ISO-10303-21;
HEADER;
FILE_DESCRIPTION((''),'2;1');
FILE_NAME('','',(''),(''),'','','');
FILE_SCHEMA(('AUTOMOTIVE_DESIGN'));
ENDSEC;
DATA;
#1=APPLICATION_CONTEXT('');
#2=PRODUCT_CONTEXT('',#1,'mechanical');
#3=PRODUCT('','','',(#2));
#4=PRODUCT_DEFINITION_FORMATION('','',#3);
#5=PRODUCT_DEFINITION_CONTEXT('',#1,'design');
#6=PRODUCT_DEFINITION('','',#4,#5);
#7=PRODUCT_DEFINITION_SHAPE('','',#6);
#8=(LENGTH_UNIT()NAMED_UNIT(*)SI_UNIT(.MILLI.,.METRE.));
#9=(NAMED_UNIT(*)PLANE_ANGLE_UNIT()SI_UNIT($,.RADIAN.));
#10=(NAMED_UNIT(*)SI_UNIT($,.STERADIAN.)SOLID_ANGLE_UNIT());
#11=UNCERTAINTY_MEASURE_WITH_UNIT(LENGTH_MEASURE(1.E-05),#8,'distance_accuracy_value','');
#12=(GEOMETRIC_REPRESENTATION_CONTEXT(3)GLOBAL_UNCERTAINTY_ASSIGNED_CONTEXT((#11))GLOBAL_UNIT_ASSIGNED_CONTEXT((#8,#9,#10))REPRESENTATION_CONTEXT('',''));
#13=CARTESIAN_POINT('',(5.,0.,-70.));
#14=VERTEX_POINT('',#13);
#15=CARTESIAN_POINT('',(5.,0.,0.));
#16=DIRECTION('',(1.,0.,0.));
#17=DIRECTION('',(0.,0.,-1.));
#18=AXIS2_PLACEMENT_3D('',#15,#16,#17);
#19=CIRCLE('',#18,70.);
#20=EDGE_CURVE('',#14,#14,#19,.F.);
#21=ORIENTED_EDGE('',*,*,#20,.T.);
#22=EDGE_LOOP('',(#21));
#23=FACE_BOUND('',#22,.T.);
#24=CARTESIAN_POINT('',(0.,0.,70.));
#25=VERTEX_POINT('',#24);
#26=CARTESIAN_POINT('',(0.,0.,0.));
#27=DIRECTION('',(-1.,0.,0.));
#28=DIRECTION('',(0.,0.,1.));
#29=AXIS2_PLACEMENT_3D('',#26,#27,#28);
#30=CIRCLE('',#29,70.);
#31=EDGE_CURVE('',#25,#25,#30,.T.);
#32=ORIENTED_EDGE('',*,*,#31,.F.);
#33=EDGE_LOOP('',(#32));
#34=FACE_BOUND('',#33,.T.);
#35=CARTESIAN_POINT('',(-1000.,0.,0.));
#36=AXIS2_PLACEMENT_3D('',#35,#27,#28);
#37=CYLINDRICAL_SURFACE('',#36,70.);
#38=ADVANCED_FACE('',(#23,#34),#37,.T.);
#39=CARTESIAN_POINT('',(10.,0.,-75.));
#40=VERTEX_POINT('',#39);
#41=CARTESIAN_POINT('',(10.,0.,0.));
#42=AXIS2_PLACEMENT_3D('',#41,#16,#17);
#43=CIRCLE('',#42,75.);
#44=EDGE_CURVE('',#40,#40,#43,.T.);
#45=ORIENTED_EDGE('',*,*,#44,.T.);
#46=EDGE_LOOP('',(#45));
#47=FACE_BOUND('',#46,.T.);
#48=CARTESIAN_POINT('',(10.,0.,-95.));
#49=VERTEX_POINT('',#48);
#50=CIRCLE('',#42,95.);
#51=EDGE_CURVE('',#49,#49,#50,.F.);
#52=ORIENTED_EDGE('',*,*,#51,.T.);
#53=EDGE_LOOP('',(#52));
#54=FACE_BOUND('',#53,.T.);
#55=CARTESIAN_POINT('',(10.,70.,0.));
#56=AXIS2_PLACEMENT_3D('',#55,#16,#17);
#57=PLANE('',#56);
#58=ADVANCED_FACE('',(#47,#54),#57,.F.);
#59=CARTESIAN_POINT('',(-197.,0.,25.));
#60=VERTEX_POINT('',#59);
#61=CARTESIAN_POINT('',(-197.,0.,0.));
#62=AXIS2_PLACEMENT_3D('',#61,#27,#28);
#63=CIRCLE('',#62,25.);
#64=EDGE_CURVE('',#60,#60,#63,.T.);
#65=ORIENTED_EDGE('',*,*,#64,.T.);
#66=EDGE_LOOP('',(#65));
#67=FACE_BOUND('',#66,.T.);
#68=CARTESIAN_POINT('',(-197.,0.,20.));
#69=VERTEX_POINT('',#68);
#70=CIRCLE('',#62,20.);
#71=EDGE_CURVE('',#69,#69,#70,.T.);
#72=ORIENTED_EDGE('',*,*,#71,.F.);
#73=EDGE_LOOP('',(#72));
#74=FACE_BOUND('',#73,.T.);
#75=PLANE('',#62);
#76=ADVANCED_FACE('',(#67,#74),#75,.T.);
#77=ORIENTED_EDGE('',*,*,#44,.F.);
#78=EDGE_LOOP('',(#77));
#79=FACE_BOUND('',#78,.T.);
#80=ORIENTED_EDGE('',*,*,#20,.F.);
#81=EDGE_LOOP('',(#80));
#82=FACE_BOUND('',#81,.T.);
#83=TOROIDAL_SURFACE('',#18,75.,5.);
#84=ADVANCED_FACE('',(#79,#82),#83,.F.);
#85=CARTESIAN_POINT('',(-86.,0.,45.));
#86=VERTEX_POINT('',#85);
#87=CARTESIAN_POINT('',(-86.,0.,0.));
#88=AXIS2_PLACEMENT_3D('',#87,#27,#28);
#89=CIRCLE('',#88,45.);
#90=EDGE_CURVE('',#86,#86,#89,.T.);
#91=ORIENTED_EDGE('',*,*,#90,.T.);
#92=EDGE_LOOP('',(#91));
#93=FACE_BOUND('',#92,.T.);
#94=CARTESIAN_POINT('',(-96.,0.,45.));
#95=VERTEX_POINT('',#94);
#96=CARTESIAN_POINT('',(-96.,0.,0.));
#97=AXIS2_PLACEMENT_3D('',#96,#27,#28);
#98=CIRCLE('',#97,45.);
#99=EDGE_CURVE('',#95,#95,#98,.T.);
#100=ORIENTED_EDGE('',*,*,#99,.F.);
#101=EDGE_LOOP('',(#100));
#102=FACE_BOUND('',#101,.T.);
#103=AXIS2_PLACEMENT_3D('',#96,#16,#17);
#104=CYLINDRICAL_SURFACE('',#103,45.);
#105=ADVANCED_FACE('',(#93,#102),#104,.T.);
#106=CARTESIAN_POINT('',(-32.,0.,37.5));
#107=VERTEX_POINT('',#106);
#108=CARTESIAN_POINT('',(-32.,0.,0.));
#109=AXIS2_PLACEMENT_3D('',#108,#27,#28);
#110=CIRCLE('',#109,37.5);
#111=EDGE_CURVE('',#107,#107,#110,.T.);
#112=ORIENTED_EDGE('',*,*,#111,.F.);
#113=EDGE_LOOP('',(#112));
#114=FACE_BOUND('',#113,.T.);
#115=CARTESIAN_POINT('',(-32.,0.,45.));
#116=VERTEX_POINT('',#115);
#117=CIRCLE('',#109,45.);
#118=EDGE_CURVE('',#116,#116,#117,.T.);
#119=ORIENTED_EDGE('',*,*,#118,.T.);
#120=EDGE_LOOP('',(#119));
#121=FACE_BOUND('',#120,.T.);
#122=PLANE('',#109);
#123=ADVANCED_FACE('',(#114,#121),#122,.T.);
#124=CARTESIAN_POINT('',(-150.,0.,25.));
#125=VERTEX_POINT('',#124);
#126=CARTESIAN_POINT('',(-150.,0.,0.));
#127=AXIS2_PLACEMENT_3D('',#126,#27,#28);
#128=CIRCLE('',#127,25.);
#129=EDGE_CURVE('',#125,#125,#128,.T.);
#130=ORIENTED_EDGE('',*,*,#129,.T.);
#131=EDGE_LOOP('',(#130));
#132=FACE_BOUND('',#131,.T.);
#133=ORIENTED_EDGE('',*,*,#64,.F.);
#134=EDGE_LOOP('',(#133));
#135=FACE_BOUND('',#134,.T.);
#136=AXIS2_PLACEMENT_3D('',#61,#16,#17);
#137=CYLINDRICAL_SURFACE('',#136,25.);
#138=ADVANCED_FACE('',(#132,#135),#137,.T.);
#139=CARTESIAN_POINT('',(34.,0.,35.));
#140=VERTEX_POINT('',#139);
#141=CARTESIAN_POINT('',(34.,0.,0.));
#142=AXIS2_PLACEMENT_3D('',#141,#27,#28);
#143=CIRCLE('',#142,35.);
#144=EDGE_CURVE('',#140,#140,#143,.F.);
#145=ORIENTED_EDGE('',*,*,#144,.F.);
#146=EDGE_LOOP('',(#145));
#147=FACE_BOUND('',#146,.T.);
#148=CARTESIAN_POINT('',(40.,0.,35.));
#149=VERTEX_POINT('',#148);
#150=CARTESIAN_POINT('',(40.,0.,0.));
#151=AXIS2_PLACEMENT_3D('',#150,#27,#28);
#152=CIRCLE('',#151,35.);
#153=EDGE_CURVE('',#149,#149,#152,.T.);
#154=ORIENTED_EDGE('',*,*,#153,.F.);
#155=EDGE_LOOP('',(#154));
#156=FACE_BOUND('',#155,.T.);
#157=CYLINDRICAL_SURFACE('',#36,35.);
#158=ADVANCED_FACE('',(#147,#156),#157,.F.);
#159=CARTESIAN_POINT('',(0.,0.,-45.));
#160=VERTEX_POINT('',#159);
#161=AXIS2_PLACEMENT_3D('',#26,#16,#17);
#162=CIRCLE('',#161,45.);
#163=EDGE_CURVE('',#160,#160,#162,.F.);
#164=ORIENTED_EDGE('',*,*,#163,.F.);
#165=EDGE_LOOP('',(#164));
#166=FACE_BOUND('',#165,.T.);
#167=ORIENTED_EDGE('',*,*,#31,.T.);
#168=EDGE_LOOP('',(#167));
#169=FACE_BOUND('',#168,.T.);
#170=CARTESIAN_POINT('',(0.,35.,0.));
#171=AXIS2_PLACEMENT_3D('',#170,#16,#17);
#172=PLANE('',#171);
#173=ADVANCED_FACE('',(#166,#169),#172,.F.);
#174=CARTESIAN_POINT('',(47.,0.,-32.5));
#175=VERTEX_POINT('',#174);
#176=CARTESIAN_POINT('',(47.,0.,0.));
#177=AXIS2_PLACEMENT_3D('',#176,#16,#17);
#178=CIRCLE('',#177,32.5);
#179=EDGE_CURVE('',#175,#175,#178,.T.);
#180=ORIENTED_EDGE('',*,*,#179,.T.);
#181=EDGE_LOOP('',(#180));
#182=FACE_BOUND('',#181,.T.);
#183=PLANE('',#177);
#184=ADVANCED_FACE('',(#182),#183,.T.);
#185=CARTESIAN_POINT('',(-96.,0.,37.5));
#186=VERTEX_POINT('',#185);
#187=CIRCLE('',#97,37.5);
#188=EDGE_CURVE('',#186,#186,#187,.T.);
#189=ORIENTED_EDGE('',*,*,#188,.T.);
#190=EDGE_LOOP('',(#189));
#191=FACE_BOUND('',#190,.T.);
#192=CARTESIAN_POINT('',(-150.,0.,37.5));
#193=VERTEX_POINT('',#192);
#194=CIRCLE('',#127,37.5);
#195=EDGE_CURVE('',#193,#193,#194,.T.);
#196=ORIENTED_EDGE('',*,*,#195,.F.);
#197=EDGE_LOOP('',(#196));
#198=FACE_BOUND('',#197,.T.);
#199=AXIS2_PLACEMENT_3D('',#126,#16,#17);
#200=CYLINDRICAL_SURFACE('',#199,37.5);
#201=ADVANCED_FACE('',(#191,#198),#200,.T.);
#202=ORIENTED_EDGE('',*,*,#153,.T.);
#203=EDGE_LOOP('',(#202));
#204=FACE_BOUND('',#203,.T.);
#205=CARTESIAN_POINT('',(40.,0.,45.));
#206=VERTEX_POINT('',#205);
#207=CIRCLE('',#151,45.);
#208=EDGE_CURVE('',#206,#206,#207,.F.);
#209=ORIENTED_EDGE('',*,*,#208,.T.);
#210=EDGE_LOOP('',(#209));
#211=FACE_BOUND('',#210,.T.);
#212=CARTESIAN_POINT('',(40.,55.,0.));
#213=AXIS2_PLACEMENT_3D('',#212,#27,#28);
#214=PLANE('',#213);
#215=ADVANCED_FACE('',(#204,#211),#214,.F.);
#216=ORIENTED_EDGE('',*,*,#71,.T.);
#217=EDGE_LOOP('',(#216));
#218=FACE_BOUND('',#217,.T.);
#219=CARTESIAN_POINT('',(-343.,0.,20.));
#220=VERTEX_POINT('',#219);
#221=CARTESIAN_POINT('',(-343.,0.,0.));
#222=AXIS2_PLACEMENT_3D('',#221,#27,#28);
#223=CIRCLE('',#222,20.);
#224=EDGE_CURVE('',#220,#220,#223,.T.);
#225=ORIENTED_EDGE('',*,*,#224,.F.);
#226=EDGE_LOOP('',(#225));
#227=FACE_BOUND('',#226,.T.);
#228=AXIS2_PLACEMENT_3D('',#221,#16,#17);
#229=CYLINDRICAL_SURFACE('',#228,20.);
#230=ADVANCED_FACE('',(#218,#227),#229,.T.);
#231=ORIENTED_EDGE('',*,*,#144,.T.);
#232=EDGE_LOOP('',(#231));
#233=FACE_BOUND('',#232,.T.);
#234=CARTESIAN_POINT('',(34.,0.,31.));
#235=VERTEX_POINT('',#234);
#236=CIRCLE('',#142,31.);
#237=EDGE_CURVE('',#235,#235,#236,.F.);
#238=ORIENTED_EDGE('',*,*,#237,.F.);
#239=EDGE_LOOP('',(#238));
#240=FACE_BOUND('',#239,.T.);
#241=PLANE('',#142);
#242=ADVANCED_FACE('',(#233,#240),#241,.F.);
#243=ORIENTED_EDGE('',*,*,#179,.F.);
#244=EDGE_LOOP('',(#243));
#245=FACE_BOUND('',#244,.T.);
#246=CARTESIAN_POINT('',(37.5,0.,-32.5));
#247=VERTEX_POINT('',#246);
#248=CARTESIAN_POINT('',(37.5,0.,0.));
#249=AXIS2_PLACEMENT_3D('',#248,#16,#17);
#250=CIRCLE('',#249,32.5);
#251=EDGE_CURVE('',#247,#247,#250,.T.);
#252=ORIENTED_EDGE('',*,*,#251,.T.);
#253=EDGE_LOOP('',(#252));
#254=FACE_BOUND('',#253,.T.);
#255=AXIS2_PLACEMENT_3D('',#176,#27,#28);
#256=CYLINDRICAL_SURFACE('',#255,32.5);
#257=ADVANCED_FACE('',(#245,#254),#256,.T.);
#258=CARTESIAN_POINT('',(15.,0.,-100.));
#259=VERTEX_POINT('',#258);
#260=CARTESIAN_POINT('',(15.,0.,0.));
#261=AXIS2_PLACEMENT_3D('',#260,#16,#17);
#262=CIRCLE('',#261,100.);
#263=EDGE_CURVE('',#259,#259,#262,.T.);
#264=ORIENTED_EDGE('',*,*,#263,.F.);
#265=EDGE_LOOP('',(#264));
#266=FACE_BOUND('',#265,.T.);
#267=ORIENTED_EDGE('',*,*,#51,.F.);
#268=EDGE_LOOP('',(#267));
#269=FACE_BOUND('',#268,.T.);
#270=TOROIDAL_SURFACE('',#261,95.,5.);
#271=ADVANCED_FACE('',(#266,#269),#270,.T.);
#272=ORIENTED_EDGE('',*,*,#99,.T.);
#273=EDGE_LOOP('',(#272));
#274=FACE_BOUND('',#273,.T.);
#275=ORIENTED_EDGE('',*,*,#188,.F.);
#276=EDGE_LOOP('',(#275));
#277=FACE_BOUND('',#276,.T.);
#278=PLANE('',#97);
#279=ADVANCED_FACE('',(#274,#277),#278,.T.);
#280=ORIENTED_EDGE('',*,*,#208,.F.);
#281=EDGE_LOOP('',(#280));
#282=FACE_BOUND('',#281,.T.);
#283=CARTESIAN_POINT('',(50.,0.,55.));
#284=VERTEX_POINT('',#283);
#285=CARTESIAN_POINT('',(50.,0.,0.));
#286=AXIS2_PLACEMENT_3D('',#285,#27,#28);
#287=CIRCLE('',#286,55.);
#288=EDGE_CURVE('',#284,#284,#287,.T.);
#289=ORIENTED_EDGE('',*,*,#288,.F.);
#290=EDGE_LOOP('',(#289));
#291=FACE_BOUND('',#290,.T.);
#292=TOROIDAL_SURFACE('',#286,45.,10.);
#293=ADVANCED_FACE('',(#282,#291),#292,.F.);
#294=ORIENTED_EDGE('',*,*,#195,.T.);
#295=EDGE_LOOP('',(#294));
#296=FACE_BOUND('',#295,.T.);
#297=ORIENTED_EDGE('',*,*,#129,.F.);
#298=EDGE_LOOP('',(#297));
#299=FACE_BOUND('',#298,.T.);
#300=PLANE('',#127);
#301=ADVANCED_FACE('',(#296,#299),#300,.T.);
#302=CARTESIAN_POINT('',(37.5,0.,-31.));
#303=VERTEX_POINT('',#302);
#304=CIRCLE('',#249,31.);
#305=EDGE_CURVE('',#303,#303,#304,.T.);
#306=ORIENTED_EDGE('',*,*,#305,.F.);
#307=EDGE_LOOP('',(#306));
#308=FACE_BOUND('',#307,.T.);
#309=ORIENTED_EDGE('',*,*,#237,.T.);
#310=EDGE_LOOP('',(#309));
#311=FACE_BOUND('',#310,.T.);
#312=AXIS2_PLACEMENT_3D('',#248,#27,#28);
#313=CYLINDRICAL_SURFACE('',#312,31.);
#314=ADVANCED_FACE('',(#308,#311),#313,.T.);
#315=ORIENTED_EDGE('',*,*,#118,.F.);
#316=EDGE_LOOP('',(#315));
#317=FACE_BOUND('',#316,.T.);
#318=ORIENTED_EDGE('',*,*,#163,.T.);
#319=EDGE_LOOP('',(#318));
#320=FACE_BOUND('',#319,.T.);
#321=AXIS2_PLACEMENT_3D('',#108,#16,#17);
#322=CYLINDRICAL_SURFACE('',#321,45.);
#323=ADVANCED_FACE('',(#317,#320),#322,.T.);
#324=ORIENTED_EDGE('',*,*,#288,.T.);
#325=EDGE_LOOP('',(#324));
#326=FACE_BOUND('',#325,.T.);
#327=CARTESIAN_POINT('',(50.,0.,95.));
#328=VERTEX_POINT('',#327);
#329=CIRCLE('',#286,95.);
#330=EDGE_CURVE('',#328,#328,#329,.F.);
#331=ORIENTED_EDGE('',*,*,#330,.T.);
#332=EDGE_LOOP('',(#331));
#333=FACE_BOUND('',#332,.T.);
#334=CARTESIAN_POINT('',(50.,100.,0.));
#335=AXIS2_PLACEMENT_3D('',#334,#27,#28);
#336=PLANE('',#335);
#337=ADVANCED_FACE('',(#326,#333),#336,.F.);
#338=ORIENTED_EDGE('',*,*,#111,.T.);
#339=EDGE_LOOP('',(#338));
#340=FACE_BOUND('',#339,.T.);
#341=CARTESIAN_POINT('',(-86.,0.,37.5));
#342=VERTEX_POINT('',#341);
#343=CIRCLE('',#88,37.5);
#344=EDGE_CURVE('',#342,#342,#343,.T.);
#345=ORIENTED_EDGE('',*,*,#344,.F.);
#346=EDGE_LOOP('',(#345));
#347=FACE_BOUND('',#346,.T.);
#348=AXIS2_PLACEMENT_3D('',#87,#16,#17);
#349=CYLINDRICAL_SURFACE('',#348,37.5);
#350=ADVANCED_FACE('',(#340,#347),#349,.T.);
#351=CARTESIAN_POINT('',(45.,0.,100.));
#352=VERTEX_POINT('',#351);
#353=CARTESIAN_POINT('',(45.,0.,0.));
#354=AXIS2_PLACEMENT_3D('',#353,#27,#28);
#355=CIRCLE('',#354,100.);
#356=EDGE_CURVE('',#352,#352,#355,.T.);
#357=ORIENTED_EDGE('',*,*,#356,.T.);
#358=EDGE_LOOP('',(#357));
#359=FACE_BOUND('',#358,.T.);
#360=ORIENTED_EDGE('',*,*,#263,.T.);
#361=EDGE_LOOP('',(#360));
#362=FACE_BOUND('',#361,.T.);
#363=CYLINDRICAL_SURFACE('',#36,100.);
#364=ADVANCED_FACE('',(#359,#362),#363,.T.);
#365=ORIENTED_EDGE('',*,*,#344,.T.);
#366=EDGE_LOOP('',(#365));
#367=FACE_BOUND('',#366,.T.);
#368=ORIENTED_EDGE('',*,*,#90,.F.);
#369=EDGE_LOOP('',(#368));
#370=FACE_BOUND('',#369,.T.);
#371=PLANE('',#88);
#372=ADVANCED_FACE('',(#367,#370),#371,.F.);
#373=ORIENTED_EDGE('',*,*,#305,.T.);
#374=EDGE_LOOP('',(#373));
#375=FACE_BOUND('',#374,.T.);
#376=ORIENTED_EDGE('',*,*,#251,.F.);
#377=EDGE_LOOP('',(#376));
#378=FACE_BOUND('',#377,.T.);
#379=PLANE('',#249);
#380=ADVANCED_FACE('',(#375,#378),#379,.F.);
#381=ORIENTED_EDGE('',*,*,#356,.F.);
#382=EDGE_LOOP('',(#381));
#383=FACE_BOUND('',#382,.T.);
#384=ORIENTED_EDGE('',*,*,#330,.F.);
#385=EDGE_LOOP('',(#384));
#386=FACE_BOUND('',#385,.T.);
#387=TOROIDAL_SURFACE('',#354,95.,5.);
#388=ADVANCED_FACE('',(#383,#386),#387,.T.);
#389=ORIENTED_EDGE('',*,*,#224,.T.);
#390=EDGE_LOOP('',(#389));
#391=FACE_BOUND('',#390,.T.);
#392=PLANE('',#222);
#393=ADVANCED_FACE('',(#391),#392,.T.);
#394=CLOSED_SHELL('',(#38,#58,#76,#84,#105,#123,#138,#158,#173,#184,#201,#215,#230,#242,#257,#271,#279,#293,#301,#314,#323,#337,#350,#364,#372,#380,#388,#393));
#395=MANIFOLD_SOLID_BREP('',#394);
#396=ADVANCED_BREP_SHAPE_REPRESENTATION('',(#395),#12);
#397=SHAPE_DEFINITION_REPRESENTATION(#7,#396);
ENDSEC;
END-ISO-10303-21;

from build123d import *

# Parameters (mm, degrees)
FILLET_1_R      = 5
FILLET_2_R      = 10
SKETCH_2_R      = 45
SKETCH_2_R_2    = 35
EXTRUDE_1_DEPTH = 32
SKETCH_3_R      = 35
EXTRUDE_2_DEPTH = 66
SKETCH_4_R      = 37.5
EXTRUDE_3_DEPTH = 54
SKETCH_5_R      = 45
EXTRUDE_4_DEPTH = 10
SKETCH_6_R      = 37.5
EXTRUDE_5_DEPTH = 54
SKETCH_7_R      = 25
EXTRUDE_6_DEPTH = 47
SKETCH_8_R      = 20
EXTRUDE_7_DEPTH = 146
SKETCH_9_R      = 31
EXTRUDE_8_DEPTH = 3.5
SKETCH_10_R     = 32.5
EXTRUDE_9_DEPTH = 9.5


with BuildPart() as part:
    # 草图1 → 旋转1 (revolve)
    with BuildSketch(Plane.XY, mode=Mode.PRIVATE) as revolve_1_sk:
        Polygon((10, 100), (50, 100), (50, 55), (40, 55), (40, 35), (0, 35), (0, 70), (10, 70), align=None)
    revolve(revolve_1_sk.sketch.rotate(Axis((-1000, 0, 0), (1, 0, 0)), 90), axis=Axis((-1000, 0, 0), (1, 0, 0)))

    # 圆角1
    fillet_1_edges = [part.edges().sort_by_distance(p)[0] for p in [
        (10, 0, -70),
        (50, 0, -100),
        (10, 0, -100),
    ]]
    fillet(fillet_1_edges, radius=FILLET_1_R)

    # 圆角2
    fillet_2_edges = [part.edges().sort_by_distance(p)[0] for p in [
        (40, 0, -55),
    ]]
    fillet(fillet_2_edges, radius=FILLET_2_R - 0.0001)  # a hair under: the kernel refuses the full size



with BuildPart() as body_2:
    # 草图2 → 凸台-拉伸1 (new body)
    with BuildSketch(Plane.ZY):
        Circle(SKETCH_2_R)
        Circle(SKETCH_2_R_2, mode=Mode.SUBTRACT)
    extrude(amount=EXTRUDE_1_DEPTH)


with BuildPart() as part_1:
    add(part.part)

    add(body_2.part)  # 凸台-拉伸2 merges body 2
    # 草图3 → 凸台-拉伸2 (add)
    with BuildSketch(Plane.ZY.offset(32)):
        Circle(SKETCH_3_R)
    extrude(amount=-EXTRUDE_2_DEPTH)

    # 草图4 → 凸台-拉伸3 (add)
    with BuildSketch(Plane.ZY.offset(32)):
        Circle(SKETCH_4_R)
    extrude(amount=EXTRUDE_3_DEPTH)

    # 草图5 → 凸台-拉伸4 (add)
    with BuildSketch(Plane.ZY.offset(86)):
        with Locations(Location((0, 0, 0), (0, 0, 180))):
            Circle(SKETCH_5_R)
    extrude(amount=EXTRUDE_4_DEPTH)

    # 草图6 → 凸台-拉伸5 (add)
    with BuildSketch(Plane.ZY.offset(96)):
        Circle(SKETCH_6_R)
    extrude(amount=EXTRUDE_5_DEPTH)

    # 草图7 → 凸台-拉伸6 (add)
    with BuildSketch(Plane.ZY.offset(150)):
        Circle(SKETCH_7_R)
    extrude(amount=EXTRUDE_6_DEPTH)

    # 草图8 → 凸台-拉伸7 (add)
    with BuildSketch(Plane.ZY.offset(197)):
        Circle(SKETCH_8_R)
    extrude(amount=EXTRUDE_7_DEPTH)

    # 草图9 → 凸台-拉伸8 (add)
    with BuildSketch(Plane(origin=(34, 0, 0), x_dir=(0, 0, -1), z_dir=(1, 0, 0))):
        with Locations(Location((0, 0, 0), (0, 0, 180))):
            Circle(SKETCH_9_R)
    extrude(amount=EXTRUDE_8_DEPTH)

    # 草图10 → 凸台-拉伸9 (add)
    with BuildSketch(Plane(origin=(37.5, 0, 0), x_dir=(0, 0, -1), z_dir=(1, 0, 0))):
        Circle(SKETCH_10_R)
    extrude(amount=EXTRUDE_9_DEPTH)


solid = part_1.part
